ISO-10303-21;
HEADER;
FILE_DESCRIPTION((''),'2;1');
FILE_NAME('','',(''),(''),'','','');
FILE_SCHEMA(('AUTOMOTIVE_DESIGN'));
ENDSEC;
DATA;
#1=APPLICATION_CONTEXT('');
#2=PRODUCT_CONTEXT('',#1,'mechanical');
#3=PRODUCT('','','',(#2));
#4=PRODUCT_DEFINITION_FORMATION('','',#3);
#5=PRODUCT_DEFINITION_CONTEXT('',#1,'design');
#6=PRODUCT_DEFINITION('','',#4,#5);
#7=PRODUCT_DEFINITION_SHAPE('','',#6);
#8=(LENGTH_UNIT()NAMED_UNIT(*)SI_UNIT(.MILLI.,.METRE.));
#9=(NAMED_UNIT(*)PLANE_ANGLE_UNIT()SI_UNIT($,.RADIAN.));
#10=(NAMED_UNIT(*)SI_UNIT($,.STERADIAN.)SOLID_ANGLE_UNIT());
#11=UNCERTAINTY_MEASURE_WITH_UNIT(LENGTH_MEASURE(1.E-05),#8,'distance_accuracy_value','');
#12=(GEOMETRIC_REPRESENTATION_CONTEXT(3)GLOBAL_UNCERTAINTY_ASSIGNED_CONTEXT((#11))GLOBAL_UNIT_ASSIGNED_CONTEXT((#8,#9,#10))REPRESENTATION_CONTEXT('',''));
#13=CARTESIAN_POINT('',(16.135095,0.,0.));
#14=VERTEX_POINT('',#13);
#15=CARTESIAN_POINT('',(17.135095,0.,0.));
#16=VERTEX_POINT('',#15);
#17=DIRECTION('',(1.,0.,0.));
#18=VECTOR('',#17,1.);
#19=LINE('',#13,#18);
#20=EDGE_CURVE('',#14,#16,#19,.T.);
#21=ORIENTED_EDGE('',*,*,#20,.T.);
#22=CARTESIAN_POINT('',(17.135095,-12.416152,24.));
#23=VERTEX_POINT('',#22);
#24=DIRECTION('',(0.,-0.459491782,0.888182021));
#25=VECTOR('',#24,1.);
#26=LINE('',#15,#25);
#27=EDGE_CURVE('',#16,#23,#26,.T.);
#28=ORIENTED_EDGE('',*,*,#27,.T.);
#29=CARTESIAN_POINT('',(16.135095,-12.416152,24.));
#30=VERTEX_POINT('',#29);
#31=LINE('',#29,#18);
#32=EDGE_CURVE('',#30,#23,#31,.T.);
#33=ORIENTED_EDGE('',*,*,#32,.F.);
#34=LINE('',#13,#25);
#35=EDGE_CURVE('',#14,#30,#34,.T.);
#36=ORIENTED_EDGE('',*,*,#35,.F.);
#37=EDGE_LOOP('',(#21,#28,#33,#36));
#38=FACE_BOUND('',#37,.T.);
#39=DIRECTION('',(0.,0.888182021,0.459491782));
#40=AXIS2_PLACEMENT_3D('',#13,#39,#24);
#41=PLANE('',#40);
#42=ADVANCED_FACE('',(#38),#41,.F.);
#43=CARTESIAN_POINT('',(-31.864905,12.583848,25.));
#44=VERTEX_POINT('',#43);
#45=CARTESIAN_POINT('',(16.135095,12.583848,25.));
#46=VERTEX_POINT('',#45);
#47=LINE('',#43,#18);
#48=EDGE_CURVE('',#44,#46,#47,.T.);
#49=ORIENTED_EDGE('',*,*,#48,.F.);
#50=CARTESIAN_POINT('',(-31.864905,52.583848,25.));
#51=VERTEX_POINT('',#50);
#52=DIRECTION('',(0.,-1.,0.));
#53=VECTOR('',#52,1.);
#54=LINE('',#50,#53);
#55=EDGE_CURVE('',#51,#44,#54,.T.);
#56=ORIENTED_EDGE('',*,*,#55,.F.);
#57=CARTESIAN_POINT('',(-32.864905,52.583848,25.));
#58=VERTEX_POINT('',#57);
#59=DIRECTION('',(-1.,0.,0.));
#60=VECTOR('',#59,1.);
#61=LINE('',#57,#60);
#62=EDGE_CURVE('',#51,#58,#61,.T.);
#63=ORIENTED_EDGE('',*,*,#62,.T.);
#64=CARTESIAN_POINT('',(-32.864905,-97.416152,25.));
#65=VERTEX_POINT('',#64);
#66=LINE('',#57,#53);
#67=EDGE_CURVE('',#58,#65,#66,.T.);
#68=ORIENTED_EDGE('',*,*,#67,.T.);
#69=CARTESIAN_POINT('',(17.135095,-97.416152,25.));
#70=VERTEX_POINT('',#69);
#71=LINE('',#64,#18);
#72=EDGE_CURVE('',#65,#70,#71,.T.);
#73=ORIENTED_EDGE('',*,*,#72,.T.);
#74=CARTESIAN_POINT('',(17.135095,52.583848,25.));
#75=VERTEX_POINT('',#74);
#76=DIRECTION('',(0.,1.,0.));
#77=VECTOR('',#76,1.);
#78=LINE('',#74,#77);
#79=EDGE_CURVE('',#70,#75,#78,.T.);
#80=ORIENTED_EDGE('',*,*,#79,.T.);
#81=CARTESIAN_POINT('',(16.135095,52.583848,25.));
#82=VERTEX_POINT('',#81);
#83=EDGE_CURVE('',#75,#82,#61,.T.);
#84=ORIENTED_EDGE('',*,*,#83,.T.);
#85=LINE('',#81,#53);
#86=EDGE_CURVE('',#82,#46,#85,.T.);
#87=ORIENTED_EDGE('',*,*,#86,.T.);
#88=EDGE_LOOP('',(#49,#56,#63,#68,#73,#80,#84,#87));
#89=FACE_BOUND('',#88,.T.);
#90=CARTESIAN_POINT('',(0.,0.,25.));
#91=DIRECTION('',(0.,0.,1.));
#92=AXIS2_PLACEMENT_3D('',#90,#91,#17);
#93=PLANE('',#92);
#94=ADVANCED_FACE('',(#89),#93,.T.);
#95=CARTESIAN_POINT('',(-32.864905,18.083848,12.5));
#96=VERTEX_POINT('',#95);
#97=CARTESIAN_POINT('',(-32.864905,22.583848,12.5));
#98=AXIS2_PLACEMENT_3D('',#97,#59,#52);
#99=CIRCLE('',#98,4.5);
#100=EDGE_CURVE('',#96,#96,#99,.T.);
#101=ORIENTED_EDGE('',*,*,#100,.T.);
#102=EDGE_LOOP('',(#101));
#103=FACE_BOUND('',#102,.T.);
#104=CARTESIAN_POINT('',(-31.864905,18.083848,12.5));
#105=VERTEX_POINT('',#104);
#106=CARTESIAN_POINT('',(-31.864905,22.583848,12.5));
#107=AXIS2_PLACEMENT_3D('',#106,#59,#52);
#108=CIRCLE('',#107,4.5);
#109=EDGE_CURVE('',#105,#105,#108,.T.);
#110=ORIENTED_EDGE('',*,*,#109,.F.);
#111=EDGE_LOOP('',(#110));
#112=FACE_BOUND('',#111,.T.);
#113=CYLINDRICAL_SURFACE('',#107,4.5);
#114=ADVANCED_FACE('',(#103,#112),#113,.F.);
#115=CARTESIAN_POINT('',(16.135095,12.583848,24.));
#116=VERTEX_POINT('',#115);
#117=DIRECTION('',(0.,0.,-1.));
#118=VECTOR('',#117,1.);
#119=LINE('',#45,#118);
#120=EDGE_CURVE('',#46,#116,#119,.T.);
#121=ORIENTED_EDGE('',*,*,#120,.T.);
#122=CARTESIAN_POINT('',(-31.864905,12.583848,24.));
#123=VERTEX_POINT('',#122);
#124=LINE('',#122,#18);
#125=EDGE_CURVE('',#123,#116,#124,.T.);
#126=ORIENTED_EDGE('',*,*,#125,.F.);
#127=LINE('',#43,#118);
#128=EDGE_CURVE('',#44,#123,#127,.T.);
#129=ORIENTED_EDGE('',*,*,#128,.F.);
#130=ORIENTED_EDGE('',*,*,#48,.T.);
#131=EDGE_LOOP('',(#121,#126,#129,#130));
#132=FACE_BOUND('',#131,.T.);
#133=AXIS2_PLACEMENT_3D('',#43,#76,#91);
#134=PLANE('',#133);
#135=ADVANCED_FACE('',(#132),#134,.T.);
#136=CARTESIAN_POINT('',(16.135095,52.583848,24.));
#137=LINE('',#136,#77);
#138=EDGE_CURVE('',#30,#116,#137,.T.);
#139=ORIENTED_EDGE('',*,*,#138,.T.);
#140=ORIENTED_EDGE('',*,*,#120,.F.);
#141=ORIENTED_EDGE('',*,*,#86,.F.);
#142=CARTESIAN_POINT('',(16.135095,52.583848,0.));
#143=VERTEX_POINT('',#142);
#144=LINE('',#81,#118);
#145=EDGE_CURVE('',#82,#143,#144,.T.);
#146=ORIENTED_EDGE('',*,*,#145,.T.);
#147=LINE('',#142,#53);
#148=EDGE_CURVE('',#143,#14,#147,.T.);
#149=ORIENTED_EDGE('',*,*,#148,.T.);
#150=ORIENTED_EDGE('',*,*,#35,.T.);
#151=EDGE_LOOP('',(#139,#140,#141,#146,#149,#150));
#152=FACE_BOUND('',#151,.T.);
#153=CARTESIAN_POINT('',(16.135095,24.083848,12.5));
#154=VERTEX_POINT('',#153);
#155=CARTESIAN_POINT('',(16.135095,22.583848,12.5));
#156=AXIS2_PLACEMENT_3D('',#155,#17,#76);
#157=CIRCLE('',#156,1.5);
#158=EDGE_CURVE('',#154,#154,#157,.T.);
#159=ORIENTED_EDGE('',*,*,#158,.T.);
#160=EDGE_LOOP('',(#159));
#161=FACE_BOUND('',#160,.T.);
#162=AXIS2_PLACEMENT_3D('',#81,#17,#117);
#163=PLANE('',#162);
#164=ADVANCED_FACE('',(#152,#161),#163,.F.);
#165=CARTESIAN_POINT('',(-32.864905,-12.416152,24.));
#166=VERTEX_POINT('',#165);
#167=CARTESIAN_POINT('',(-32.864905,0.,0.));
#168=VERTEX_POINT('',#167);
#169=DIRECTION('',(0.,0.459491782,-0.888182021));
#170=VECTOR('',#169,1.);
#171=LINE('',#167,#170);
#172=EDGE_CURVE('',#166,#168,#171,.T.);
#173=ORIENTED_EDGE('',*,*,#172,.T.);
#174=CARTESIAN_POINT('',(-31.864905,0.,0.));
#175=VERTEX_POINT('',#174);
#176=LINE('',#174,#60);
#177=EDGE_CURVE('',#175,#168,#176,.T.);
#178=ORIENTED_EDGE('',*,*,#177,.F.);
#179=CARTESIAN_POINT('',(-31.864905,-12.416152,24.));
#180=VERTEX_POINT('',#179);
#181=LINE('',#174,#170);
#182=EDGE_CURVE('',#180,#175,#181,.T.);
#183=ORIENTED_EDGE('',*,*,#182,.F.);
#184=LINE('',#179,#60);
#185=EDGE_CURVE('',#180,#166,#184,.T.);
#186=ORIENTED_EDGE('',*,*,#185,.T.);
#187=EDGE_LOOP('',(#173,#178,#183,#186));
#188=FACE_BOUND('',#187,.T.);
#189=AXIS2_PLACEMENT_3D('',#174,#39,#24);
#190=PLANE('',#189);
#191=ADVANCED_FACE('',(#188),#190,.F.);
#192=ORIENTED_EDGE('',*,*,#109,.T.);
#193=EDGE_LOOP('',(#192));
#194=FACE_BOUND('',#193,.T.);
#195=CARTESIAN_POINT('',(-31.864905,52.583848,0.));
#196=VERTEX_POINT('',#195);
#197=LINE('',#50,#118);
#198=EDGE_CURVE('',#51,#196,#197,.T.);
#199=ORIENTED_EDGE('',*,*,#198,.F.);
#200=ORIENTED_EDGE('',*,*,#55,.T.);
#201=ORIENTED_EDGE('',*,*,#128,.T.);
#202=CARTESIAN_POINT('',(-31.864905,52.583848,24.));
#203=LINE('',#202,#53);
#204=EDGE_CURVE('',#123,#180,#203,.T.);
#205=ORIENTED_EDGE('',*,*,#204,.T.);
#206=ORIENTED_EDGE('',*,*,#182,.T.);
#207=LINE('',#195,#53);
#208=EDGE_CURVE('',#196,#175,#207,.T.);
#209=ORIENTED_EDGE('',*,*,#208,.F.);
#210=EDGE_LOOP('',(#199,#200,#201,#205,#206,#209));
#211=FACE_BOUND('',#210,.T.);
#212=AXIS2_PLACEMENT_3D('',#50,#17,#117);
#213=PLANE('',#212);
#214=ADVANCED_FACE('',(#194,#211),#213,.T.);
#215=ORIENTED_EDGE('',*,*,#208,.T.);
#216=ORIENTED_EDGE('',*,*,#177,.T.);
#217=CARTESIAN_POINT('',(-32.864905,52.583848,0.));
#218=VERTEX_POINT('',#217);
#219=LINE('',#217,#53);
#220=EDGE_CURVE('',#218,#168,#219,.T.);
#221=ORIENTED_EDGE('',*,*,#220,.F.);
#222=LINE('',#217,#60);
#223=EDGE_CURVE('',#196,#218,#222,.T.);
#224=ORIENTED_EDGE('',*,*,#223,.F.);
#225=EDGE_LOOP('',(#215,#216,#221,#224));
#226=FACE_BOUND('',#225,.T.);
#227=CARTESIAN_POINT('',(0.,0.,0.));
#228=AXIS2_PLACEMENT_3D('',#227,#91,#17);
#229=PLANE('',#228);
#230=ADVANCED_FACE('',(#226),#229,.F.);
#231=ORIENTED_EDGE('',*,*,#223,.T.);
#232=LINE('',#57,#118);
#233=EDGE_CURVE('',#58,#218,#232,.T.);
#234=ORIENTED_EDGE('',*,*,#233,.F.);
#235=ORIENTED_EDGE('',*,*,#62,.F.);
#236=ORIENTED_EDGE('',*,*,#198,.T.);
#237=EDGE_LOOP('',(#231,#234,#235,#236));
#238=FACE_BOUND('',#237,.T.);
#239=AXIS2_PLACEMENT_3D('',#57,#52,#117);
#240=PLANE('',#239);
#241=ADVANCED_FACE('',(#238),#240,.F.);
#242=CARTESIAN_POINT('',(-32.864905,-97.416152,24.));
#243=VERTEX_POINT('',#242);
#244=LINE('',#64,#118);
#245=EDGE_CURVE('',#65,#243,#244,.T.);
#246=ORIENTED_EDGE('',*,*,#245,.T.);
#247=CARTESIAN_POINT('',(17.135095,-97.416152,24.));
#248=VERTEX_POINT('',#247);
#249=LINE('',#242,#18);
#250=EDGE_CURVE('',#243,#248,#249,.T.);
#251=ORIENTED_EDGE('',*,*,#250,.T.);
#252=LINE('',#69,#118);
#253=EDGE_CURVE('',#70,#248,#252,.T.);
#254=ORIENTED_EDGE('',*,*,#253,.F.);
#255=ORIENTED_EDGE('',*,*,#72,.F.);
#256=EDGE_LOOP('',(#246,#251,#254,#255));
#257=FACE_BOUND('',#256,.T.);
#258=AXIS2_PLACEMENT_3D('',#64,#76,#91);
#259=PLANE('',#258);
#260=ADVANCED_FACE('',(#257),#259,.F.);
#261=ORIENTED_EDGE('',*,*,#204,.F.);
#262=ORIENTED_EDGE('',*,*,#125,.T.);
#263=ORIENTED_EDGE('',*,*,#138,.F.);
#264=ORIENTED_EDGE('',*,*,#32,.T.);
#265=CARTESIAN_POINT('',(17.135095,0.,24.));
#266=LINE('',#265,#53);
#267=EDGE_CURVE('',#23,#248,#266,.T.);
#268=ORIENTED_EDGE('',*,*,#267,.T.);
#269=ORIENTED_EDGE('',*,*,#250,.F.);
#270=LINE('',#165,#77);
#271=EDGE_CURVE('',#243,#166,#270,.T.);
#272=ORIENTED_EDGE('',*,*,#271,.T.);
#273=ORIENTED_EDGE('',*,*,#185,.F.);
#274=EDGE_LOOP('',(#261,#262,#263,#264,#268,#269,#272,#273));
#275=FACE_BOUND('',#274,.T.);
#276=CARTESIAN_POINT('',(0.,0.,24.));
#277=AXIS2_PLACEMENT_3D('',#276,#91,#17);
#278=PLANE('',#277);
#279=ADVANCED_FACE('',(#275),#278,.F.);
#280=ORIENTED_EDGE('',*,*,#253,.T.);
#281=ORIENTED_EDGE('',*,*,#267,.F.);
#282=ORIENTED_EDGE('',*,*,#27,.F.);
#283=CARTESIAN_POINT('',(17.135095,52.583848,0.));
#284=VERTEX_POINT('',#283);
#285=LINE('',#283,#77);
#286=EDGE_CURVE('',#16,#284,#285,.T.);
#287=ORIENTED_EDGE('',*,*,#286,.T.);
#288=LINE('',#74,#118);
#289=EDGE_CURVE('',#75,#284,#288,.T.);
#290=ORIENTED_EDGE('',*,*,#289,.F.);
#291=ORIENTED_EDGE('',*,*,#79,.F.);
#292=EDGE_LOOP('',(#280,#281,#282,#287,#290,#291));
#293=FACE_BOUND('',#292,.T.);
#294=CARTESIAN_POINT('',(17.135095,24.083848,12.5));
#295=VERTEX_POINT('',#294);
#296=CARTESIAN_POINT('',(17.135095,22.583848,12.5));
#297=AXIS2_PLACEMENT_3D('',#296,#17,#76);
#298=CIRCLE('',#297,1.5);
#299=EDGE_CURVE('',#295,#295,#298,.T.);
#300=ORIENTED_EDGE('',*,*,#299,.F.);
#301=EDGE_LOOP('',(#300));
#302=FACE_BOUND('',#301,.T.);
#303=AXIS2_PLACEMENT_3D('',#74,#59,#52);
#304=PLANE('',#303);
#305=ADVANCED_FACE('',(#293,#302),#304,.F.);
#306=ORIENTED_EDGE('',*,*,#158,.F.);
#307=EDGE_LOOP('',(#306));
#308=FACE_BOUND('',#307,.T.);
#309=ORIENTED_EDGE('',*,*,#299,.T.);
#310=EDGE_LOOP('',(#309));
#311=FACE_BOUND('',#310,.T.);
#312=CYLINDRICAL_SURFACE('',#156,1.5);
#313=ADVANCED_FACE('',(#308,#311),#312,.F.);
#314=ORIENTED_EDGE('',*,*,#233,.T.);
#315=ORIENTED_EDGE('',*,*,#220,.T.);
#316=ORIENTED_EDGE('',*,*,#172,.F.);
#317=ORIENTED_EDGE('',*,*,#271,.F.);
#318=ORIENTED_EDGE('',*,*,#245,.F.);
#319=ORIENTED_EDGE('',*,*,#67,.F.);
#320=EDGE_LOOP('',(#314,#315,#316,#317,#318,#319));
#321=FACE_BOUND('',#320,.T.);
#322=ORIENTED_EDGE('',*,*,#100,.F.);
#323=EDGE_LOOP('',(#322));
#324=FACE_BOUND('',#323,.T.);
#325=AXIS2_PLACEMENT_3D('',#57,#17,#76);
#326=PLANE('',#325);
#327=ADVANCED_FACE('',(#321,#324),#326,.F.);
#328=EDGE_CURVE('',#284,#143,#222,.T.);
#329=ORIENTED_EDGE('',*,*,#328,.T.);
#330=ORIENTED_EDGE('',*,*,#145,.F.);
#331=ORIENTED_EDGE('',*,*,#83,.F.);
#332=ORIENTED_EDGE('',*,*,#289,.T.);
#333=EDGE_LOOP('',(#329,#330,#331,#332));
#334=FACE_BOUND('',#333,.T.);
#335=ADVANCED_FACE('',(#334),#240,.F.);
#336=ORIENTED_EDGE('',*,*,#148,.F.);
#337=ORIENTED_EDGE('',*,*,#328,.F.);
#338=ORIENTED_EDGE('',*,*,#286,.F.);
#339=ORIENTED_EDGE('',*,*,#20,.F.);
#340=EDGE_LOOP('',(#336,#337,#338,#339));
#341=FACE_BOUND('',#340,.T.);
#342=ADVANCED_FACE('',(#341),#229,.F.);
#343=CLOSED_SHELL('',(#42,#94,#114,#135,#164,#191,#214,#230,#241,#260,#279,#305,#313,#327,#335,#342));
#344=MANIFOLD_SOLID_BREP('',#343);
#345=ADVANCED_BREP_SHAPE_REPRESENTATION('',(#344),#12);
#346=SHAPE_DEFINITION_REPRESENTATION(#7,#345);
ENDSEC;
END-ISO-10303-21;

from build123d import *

# Parameters (mm, degrees)
CROQUIS2_W              = 50
CROQUIS2_H              = 150
SALIENTE_EXTRUIR1_DEPTH = 25
CROQUIS6_W              = 48
CROQUIS6_H              = 40
CORTAR_EXTRUIR1_DEPTH   = 25
VACIADO2_START          = -31.864905155
VACIADO2_OUTLINE_W      = 110
VACIADO2_OUTLINE_H      = 23
VACIADO2_DEPTH          = 48
CROQUIS8_R              = 4.5
CORTAR_EXTRUIR3_DEPTH   = 1
CROQUIS9_W              = 48
CROQUIS9_H              = 110
CORTAR_EXTRUIR4_DEPTH   = 10
CORTAR_EXTRUIR5_DEPTH   = 1
CORTAR_EXTRUIR6_DEPTH   = 1
CROQUIS12_R             = 1.5
CORTAR_EXTRUIR7_DEPTH   = 1


# Read off the part's stored shape, not the designer's step: Vaciado2
with BuildPart() as part:
    # Croquis2 → Saliente-Extruir1 (new body)
    with BuildSketch(Plane.XY):
        with Locations((-7.864905155, -22.416151752)):
            Rectangle(CROQUIS2_W, CROQUIS2_H)
    extrude(amount=SALIENTE_EXTRUIR1_DEPTH)

    # Croquis6 → Cortar-Extruir1 (cut)
    with BuildSketch(Plane(origin=(0, 0, 0), x_dir=(-1, 0, 0), z_dir=(0, 0, -1))):
        with Locations((7.864905155, 32.583848248)):
            Rectangle(CROQUIS6_W, CROQUIS6_H)
    extrude(amount=-CORTAR_EXTRUIR1_DEPTH, mode=Mode.SUBTRACT)

    # Vaciado2 outline → Vaciado2 (cut)
    with BuildSketch(Plane.YZ.offset(VACIADO2_START)):
        with Locations((-42.416151752, 12.5)):
            Rectangle(VACIADO2_OUTLINE_W, VACIADO2_OUTLINE_H)
    extrude(amount=VACIADO2_DEPTH, mode=Mode.SUBTRACT)

    # Croquis8 → Cortar-Extruir3 (cut)
    with BuildSketch(Plane.ZY.offset(32.864905155)):
        with Locations(Location((12.5, 22.583848248, 0), (0, 0, 270))):
            Circle(CROQUIS8_R)
    extrude(amount=-CORTAR_EXTRUIR3_DEPTH, mode=Mode.SUBTRACT)

    # Croquis9 → Cortar-Extruir4 (cut)
    with BuildSketch(Plane(origin=(0, 0, 0), x_dir=(-1, 0, 0), z_dir=(0, 0, -1))):
        with Locations((7.864905155, -42.416151752)):
            Rectangle(CROQUIS9_W, CROQUIS9_H)
    extrude(amount=-CORTAR_EXTRUIR4_DEPTH, mode=Mode.SUBTRACT)

    # Croquis10 → Cortar-Extruir5 (cut)
    with BuildSketch(Plane.ZY.offset(32.864905155)):
        Polygon((0, 0), (24, -12.416151752), (24, -97.416151752), (0, -97.416151752), align=None)
    extrude(amount=-CORTAR_EXTRUIR5_DEPTH, mode=Mode.SUBTRACT)

    # Croquis11 → Cortar-Extruir6 (cut)
    with BuildSketch(Plane(origin=(17.135094845, 0, 0), x_dir=(0, 0, -1), z_dir=(1, 0, 0))):
        Polygon((0, 0), (-24, -12.416151752), (-24, -97.416151752), (0, -97.416151752), align=None)
    extrude(amount=-CORTAR_EXTRUIR6_DEPTH, mode=Mode.SUBTRACT)

    # Croquis12 → Cortar-Extruir7 (cut)
    with BuildSketch(Plane(origin=(17.135094845, 0, 0), x_dir=(0, 0, -1), z_dir=(1, 0, 0))):
        with Locations(Location((-12.5, 22.583848248, 0), (0, 0, 90))):
            Circle(CROQUIS12_R)
    extrude(amount=-CORTAR_EXTRUIR7_DEPTH, mode=Mode.SUBTRACT)


solid = part.part
